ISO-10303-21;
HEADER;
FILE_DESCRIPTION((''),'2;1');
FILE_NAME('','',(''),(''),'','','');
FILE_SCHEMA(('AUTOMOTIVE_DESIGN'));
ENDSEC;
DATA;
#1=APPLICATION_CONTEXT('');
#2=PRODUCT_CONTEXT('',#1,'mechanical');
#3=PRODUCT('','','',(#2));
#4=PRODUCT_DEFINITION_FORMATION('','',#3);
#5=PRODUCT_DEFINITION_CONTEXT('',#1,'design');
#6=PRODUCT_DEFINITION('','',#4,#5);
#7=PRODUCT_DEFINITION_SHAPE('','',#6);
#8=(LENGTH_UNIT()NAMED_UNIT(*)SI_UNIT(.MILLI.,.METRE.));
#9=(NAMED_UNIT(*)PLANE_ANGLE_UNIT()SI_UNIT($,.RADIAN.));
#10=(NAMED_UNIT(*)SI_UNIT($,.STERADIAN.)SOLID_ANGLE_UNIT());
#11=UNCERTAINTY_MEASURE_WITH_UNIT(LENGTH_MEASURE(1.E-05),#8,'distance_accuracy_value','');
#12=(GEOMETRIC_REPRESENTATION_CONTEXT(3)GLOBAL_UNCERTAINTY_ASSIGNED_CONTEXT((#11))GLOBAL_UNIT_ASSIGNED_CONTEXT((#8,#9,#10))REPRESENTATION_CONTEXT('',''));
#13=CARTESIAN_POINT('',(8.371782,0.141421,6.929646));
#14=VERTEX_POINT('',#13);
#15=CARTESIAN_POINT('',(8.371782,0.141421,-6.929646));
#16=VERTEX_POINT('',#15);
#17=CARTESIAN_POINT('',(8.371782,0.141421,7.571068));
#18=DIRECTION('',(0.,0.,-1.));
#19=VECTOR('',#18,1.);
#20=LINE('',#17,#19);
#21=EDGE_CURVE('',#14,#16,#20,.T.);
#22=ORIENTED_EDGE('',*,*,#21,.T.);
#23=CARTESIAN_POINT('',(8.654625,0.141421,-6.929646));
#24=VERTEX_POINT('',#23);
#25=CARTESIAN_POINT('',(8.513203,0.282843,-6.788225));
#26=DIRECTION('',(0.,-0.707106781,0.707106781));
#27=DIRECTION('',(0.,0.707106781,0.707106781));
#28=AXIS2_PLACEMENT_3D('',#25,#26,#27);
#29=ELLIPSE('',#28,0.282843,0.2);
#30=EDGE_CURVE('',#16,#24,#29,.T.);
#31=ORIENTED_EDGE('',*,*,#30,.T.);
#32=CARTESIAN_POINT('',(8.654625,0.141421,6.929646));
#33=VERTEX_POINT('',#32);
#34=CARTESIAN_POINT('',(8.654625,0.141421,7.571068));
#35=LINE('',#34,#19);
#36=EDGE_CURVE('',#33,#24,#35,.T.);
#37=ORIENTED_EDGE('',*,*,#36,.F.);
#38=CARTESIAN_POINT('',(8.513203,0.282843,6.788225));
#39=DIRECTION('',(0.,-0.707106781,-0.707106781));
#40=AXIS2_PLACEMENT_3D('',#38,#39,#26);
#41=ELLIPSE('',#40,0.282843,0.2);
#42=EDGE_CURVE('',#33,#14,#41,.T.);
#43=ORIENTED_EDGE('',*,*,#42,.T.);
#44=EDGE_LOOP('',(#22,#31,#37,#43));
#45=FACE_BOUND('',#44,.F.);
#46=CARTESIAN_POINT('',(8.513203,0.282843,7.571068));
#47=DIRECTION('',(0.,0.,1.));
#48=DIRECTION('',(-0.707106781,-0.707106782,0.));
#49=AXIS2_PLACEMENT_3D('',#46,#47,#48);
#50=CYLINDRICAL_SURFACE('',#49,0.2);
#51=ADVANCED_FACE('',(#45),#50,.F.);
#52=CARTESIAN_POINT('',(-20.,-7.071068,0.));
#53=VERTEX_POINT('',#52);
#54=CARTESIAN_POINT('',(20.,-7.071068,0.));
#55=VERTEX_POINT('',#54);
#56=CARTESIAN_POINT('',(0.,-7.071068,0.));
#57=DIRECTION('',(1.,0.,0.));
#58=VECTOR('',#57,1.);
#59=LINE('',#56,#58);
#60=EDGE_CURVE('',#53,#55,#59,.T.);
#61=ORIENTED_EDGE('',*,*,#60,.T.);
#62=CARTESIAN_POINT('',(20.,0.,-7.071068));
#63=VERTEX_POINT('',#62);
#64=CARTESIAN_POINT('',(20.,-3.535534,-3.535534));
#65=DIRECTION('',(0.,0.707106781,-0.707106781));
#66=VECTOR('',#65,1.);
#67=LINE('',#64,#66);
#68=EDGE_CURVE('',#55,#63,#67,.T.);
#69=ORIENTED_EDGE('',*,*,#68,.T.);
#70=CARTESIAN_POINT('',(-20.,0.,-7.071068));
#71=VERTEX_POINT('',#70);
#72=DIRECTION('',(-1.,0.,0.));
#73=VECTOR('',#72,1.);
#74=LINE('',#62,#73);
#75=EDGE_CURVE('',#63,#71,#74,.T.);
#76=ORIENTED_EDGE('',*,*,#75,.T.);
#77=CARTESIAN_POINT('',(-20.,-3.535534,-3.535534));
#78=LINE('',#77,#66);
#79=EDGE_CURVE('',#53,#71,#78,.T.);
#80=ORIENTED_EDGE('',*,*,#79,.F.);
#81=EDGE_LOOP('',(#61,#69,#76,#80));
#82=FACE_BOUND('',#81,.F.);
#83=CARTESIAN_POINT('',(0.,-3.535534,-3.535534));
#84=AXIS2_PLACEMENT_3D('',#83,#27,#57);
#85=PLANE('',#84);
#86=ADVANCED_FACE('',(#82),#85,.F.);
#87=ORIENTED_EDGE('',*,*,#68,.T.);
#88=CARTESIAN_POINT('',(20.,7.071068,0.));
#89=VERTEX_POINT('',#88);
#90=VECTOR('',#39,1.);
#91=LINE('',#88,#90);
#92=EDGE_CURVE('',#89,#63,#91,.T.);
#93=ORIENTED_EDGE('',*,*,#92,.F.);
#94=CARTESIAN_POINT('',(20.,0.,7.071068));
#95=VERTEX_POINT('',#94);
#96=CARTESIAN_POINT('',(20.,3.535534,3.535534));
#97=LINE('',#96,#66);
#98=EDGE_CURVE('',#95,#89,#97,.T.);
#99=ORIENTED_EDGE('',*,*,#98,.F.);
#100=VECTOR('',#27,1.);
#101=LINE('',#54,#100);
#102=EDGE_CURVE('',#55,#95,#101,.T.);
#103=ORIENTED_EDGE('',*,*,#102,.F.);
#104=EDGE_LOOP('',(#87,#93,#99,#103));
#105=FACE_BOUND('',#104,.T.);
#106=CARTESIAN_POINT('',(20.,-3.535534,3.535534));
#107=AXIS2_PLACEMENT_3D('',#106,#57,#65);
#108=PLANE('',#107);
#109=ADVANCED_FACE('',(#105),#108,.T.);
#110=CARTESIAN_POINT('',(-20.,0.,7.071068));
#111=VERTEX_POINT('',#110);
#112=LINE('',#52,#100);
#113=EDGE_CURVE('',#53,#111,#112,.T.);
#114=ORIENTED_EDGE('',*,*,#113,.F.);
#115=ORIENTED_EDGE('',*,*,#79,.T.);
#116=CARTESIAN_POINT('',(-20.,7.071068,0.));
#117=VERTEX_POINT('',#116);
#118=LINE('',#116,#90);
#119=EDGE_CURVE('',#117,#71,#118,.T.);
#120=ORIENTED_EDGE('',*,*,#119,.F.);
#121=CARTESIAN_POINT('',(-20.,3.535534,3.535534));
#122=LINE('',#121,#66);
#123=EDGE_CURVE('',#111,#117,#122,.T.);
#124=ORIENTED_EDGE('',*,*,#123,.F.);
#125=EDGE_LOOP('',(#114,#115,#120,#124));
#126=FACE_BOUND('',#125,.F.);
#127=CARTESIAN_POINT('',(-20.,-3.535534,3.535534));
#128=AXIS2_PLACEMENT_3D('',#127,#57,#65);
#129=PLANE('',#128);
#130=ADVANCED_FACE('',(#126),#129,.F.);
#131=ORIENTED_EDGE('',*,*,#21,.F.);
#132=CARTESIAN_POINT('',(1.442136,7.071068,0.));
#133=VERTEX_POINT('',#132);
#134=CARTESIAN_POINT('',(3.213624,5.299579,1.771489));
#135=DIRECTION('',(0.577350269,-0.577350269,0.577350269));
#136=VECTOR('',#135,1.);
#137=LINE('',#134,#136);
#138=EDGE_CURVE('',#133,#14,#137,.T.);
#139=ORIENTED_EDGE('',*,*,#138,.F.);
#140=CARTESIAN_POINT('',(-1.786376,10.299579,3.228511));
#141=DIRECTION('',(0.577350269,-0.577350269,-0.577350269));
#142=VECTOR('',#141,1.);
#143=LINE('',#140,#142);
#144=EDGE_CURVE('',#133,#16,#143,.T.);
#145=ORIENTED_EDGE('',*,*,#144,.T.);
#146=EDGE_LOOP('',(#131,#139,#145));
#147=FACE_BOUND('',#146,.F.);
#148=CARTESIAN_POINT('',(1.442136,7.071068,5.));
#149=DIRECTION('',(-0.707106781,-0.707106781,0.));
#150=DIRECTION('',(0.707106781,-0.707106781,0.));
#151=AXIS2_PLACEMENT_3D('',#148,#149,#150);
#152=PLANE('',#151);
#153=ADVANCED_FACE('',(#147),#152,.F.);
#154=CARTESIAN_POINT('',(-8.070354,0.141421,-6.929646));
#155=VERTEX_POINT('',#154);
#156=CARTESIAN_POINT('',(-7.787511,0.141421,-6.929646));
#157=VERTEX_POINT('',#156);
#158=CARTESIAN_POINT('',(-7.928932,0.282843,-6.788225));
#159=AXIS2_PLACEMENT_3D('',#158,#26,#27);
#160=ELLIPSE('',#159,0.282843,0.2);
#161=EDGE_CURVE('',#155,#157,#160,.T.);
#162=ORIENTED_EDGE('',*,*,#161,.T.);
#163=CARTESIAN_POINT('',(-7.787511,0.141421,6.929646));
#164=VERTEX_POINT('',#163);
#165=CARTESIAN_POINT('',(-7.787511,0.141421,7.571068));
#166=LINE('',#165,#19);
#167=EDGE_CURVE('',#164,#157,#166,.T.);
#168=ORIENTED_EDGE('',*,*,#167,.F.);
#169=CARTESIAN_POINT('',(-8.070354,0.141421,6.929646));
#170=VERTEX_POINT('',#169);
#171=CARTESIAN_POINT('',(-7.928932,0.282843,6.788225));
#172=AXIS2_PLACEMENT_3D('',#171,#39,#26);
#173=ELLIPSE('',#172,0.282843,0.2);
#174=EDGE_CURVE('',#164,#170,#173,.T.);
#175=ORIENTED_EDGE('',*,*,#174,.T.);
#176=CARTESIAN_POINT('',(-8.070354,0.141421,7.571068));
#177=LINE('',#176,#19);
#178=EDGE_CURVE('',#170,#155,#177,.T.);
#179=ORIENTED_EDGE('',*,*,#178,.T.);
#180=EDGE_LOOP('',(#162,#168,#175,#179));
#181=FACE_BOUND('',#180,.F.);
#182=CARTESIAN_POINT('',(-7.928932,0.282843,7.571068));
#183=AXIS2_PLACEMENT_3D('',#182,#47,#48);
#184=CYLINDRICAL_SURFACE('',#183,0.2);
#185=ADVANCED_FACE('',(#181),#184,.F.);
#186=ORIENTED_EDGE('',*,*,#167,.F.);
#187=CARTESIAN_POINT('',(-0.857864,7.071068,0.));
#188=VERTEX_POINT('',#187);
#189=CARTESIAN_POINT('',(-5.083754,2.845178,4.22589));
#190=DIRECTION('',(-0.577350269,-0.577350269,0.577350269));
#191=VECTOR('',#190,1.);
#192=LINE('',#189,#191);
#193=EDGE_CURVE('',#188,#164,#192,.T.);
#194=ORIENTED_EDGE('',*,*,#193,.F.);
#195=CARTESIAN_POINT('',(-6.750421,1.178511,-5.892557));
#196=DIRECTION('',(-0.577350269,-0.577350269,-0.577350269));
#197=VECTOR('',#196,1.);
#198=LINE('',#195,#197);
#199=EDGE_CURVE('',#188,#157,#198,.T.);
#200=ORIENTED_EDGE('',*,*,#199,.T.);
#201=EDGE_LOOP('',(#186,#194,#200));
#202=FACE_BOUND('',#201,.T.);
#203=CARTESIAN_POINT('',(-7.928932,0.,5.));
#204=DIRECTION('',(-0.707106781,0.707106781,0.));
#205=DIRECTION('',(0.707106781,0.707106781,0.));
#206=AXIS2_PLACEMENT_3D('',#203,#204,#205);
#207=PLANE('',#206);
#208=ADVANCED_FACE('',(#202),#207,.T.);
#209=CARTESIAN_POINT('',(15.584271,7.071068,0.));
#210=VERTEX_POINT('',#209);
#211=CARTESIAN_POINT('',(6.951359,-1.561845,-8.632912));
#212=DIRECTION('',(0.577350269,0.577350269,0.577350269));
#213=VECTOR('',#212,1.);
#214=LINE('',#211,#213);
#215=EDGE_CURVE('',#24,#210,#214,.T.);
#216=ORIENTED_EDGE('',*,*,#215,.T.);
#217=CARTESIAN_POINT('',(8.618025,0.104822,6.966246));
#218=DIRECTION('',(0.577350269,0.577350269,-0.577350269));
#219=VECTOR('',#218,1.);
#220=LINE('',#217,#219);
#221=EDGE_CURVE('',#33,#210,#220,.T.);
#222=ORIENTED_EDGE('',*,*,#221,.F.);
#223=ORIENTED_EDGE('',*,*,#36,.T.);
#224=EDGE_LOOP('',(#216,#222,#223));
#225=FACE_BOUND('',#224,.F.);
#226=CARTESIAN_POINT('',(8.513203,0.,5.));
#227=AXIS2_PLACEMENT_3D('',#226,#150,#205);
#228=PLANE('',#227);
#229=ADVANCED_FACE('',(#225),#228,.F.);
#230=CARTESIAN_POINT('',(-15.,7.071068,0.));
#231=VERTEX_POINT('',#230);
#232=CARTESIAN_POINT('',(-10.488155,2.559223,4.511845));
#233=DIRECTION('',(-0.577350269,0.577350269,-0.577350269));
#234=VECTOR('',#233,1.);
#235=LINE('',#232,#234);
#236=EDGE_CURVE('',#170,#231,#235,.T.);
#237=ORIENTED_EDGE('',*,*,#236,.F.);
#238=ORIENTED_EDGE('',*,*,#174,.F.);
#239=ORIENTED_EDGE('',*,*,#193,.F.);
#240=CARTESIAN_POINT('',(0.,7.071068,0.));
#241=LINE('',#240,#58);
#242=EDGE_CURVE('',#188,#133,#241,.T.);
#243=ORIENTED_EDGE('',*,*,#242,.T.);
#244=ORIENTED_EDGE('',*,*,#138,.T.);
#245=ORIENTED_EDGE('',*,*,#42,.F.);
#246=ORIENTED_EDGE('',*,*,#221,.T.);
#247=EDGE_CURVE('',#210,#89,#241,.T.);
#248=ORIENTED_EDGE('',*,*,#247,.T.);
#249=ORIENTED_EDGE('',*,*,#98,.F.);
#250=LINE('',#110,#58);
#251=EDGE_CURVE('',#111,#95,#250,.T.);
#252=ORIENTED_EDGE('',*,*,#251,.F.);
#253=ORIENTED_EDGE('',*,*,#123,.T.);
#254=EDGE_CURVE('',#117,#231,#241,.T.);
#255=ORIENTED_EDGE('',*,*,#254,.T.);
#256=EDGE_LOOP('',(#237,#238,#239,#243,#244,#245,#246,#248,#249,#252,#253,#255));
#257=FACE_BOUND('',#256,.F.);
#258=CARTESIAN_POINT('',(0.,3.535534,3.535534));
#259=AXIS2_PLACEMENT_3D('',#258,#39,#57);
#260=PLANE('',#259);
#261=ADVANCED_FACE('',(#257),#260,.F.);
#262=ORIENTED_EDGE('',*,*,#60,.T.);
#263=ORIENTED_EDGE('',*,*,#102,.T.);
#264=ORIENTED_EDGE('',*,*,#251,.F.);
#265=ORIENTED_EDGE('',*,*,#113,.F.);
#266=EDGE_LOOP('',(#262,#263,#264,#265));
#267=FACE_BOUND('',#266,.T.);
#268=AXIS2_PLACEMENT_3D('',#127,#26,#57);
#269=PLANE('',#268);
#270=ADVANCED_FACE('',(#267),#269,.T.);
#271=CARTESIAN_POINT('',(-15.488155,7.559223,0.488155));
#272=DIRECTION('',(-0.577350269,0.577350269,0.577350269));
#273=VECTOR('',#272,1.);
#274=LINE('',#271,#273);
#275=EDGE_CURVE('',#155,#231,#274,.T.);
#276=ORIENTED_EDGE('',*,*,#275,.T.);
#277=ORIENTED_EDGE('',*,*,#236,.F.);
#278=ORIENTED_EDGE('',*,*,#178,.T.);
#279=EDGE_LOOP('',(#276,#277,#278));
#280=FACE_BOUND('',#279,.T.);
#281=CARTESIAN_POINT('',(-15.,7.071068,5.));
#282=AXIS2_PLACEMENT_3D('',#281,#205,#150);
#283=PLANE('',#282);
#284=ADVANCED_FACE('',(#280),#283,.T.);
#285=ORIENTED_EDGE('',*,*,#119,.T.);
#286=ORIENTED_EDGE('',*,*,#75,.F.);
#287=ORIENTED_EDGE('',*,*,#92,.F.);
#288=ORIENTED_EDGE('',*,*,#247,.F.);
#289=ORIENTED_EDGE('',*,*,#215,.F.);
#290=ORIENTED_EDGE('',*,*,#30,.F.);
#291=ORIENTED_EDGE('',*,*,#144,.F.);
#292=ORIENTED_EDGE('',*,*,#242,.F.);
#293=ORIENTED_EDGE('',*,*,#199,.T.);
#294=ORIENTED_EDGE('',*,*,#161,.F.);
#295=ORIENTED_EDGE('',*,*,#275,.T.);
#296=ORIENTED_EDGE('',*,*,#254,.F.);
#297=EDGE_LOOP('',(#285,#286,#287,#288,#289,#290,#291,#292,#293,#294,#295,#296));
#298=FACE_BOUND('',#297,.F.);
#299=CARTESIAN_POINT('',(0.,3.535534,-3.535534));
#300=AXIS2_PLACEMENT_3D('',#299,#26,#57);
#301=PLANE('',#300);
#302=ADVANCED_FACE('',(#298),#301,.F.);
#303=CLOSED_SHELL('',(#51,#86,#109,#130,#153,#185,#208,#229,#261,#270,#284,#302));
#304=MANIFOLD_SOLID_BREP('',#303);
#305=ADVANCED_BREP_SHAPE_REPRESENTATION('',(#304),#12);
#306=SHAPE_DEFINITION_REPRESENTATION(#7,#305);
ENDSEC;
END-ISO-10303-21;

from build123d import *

# Parameters (mm, degrees)
F0_W        = 40
F0_H        = 10
F2_DEPTH    = 5
F3_ANGLE    = 45
F5_DEPTH    = 12.5
F6_T4_DEPTH = 15.1421356237
F7_T4_DEPTH = 15.1421356237


# Not quite as in the source:
# - a fillet or chamfer that OpenCascade refuses, or shapes differently, is made with other operations: its cross-section is extruded or revolved along the edge and cut away or added
# - a feature names something its author has since deleted; it is built from what else it names


with BuildPart() as f2:
    # F0 (on Top) → F2 (new body, symmetric)
    with BuildSketch(Plane.XY):
        Rectangle(F0_W, F0_H)
    extrude(amount=F2_DEPTH, both=True)


with BuildPart() as f2_1:
    # F3: moved
    add(f2.part.rotate(Axis((0, 0, 0), (-1, 0, 0)), F3_ANGLE))

    # F4 (on offset) → F5 (cut, symmetric)
    with BuildSketch(Plane.XY.offset(5)):
        Polygon((-0.8578643763, 7.0710678119), (-15, 7.0710678119), (-7.9289321881, 0), align=None)
        Polygon((15.5842712475, 7.0710678119), (1.4421356237, 7.0710678119), (8.5132034356, 0), align=None)
    extrude(amount=F5_DEPTH, both=True, mode=Mode.SUBTRACT)

    # F6: fillet of radius 0.2 on 1 edges, made by hand


with BuildPart() as f6_tool2:
    # F6_s3 → F6_t4 (new body)
    with BuildSketch(Plane.XY.offset(7.5710678119)):
        with BuildLine():
            ThreePointArc((-8.0703535444, 0.1414213562), (-7.9289321881, 0.0828427125), (-7.7875108319, 0.1414213562))
            Line((-7.7875108319, 0.1414213562), (-7.9289321881, 0))
            Line((-7.9289321881, 0), (-8.0703535444, 0.1414213562))
        make_face()
    extrude(amount=-F6_T4_DEPTH)

    split(bisect_by=Plane(origin=(0, 3.5355339059, 3.5355339059), x_dir=(1, 0, 0), z_dir=(0, -0.7071067812, -0.7071067812)), keep=Keep.TOP)

    split(bisect_by=Plane(origin=(0, 3.5355339059, -3.5355339059), x_dir=(1, 0, 0), z_dir=(0, -0.7071067812, 0.7071067812)), keep=Keep.TOP)


with BuildPart() as f2_2:
    add(f2_1.part)

    # F6_t1: union F6_tool2
    add(f6_tool2.part)

    # F7: fillet of radius 0.2 on 1 edges, made by hand


with BuildPart() as f7_tool2:
    # F7_s3 → F7_t4 (new body)
    with BuildSketch(Plane.XY.offset(7.5710678119)):
        with BuildLine():
            ThreePointArc((8.3717820794, 0.1414213562), (8.5132034356, 0.0828427125), (8.6546247918, 0.1414213562))
            Line((8.6546247918, 0.1414213562), (8.5132034356, 0))
            Line((8.5132034356, 0), (8.3717820794, 0.1414213562))
        make_face()
    extrude(amount=-F7_T4_DEPTH)

    split(bisect_by=Plane(origin=(0, 3.5355339059, -3.5355339059), x_dir=(1, 0, 0), z_dir=(0, -0.7071067812, 0.7071067812)), keep=Keep.TOP)

    split(bisect_by=Plane(origin=(0, 3.5355339059, 3.5355339059), x_dir=(1, 0, 0), z_dir=(0, -0.7071067812, -0.7071067812)), keep=Keep.TOP)


with BuildPart() as f2_3:
    add(f2_2.part)

    # F7_t1: union F7_tool2
    add(f7_tool2.part)


solid = f2_3.part
